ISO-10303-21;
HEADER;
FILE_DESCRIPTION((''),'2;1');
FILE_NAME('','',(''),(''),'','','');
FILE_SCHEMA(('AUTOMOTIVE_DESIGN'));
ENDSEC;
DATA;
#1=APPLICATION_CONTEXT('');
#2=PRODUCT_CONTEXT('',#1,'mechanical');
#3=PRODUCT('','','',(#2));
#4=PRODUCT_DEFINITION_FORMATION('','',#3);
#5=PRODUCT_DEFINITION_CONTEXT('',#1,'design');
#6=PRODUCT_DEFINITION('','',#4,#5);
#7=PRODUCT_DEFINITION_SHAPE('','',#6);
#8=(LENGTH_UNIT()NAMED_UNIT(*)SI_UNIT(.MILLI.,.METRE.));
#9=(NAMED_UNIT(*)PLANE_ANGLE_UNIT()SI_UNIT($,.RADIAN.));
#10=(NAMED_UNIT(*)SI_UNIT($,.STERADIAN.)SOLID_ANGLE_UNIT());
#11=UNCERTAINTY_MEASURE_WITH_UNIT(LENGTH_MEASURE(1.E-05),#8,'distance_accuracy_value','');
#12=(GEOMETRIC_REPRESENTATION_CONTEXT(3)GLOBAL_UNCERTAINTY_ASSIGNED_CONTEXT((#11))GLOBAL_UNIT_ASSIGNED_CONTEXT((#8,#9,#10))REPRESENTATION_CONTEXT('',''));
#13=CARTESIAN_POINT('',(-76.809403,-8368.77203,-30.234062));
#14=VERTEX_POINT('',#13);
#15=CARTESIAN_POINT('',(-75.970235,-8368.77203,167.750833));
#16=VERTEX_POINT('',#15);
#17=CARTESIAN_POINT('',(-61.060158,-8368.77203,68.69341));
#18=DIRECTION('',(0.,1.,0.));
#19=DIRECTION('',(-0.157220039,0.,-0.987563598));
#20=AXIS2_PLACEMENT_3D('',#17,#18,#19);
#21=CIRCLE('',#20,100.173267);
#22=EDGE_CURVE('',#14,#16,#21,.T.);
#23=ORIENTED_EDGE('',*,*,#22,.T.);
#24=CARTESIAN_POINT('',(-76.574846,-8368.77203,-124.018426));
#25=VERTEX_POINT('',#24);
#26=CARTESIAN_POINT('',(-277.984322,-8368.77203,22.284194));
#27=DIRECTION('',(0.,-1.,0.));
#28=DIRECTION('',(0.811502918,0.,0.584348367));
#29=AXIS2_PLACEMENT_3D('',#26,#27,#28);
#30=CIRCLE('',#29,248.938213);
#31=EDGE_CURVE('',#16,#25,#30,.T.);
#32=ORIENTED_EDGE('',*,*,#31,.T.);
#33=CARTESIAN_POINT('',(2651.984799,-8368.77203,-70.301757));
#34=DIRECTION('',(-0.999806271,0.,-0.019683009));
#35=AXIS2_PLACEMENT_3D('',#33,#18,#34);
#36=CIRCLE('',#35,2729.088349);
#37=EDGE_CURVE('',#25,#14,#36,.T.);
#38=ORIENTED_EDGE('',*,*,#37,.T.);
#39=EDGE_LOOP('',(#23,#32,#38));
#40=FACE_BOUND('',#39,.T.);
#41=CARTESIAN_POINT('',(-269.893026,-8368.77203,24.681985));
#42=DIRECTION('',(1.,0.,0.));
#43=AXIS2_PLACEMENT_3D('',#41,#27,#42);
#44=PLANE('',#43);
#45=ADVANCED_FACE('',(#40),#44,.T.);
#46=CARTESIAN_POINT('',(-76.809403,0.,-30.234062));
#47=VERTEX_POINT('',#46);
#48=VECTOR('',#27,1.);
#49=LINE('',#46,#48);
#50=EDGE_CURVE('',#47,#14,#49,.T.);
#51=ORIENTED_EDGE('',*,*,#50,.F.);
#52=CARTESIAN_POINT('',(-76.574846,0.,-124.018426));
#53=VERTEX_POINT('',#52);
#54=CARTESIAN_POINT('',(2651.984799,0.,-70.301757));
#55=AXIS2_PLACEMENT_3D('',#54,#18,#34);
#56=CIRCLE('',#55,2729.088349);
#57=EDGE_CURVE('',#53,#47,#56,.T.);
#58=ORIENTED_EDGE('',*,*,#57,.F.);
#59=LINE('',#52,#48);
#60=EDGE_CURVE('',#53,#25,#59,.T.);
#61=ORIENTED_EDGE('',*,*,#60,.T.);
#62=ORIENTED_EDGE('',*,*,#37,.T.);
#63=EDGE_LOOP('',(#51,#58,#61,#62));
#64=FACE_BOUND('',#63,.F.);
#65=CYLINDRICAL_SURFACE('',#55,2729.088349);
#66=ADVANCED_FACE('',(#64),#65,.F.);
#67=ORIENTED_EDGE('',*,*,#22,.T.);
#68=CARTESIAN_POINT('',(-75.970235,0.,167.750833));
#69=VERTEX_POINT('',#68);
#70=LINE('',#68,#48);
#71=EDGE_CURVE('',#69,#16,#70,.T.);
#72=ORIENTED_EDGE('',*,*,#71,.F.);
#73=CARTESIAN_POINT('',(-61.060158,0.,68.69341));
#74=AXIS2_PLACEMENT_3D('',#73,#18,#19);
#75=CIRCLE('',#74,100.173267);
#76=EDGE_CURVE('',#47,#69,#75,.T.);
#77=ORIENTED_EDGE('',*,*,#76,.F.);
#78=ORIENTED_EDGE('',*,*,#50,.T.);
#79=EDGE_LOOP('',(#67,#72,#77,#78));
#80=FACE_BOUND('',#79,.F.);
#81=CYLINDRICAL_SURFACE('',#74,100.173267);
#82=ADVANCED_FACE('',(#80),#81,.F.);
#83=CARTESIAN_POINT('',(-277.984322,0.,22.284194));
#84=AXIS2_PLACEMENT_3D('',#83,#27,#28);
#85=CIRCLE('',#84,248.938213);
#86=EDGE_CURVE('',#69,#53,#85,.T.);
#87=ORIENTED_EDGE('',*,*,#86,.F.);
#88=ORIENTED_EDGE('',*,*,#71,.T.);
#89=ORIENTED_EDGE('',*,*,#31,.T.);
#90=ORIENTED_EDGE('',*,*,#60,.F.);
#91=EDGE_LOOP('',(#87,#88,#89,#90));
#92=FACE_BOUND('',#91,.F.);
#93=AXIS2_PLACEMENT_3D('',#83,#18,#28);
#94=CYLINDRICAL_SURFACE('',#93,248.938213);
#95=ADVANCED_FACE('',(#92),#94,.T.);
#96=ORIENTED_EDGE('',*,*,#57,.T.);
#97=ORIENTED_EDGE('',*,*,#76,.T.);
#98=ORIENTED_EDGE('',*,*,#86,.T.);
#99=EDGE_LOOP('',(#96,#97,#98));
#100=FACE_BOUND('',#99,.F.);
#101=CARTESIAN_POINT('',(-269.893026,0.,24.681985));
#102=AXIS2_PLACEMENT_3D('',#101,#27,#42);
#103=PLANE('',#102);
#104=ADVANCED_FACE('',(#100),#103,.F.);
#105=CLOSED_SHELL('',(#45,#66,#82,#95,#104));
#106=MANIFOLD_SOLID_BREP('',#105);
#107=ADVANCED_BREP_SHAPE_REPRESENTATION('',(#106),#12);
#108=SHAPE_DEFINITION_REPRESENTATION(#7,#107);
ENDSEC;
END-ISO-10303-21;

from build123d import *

# Parameters (mm, degrees)
F1_DEPTH = 8368.7720298767


with BuildPart() as f1:
    # F0 (on Front) → F1 (new body)
    with BuildSketch(Plane.XZ):
        with BuildLine():
            ThreePointArc((-76.8094025219, -30.2340624724), (-161.2325249757, 69.1179944594), (-75.9702353455, 167.7508327458))
            ThreePointArc((-75.9702353455, 167.7508327459), (-526.9220006184, 22.800048198), (-76.5748455344, -124.0184262918))
            ThreePointArc((-76.5748455344, -124.0184262918), (-77.095014232, -77.1272520204), (-76.8094025219, -30.2340624724))
        make_face()
    extrude(amount=F1_DEPTH)


solid = f1.part
